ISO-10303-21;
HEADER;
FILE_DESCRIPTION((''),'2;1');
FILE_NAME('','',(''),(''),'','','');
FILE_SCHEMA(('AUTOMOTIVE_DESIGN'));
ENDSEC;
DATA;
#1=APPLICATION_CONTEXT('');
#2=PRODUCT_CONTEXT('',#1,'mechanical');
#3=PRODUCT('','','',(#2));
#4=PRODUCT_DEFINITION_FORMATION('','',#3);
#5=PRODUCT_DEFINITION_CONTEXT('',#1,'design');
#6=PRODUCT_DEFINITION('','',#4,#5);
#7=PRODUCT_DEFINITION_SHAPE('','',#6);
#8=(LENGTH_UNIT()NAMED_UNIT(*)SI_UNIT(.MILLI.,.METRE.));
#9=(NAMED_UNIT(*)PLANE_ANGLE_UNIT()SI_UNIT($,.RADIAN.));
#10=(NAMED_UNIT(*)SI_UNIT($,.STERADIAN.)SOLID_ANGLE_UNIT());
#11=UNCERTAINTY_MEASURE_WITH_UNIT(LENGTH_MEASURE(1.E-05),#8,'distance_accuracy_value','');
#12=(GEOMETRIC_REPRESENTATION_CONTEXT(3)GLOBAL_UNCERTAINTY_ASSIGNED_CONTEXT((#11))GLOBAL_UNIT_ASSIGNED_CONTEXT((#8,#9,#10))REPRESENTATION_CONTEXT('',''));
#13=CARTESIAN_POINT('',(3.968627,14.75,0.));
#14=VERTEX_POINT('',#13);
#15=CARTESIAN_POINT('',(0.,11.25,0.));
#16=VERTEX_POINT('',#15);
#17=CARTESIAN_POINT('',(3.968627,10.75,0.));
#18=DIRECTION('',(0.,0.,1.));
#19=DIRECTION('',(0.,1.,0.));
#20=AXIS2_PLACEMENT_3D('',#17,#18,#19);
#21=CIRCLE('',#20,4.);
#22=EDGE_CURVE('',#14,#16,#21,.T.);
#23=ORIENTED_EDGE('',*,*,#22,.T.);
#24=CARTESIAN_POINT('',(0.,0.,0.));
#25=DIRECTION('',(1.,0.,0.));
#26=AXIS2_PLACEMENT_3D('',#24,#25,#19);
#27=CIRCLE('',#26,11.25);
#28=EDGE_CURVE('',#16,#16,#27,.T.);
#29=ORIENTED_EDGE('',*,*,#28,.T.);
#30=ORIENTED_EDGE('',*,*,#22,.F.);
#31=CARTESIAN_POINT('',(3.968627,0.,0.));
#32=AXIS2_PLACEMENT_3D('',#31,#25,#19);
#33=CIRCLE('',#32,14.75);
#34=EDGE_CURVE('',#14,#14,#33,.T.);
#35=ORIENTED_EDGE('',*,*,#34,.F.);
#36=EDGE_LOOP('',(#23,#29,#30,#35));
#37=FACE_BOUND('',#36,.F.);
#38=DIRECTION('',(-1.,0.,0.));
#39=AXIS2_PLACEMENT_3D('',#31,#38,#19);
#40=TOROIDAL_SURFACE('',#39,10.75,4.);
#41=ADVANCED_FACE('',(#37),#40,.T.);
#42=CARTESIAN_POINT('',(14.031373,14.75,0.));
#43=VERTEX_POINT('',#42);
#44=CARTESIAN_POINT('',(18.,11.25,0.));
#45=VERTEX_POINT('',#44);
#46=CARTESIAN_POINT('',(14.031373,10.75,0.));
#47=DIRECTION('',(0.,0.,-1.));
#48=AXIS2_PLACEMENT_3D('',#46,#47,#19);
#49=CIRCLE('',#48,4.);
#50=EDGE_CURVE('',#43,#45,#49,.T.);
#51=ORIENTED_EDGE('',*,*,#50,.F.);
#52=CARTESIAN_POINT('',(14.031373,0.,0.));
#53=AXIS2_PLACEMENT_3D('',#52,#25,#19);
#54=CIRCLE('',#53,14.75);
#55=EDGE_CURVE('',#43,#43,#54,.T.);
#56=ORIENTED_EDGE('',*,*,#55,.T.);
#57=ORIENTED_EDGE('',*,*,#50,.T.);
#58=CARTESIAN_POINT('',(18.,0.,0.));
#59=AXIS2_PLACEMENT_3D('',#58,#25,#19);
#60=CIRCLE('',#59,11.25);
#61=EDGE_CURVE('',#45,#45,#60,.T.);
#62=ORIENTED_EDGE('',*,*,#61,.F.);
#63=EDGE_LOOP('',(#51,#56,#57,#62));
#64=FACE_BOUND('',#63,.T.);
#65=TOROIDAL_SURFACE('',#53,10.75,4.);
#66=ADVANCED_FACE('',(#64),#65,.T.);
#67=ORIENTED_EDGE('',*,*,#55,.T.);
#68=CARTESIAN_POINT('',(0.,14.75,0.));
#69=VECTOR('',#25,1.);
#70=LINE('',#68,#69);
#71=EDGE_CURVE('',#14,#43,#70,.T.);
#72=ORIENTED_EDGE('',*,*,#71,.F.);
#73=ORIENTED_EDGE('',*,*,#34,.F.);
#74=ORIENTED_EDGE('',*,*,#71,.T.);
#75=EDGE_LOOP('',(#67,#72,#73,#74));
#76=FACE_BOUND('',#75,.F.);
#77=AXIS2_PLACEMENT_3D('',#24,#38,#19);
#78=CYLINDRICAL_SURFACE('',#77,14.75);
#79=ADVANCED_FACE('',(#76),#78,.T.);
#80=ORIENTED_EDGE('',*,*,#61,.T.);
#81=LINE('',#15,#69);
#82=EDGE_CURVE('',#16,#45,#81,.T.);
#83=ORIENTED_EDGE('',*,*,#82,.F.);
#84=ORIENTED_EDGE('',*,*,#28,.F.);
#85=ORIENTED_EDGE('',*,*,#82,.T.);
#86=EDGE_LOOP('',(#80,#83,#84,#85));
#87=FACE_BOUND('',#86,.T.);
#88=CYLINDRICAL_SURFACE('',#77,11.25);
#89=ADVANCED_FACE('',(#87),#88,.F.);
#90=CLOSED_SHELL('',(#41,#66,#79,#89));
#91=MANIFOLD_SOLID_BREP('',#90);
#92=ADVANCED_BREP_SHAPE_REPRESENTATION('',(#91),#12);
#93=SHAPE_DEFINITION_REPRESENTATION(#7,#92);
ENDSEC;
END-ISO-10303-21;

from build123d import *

# Parameters (mm, degrees)
F0_R     = 14.75
F0_R_2   = 11.25
F1_DEPTH = 18


# Not quite as in the source:
# - a fillet or chamfer that OpenCascade refuses, or shapes differently, is made with other operations: its cross-section is extruded or revolved along the edge and cut away or added


with BuildPart() as f1:
    # F0 (on Right) → F1 (new body)
    with BuildSketch(Plane.YZ):
        Circle(F0_R)
        Circle(F0_R_2, mode=Mode.SUBTRACT)
    extrude(amount=F1_DEPTH)

    # F2: fillet of radius 4 on 2 edges, made by hand

    # F2_s1 → F2_t2 (revolve, cut)
    with BuildSketch(Plane.XY):
        with BuildLine():
            ThreePointArc((14.0313730334, 14.75), (16.6771243445, 13.75), (18, 11.25))
            Line((18, 11.25), (18, 14.75))
            Line((18, 14.75), (14.0313730334, 14.75))
        make_face()
    revolve(axis=Axis((18, 0, 0), (1, 0, 0)), mode=Mode.SUBTRACT)

    # F2_s3 → F2_t4 (revolve, cut)
    with BuildSketch(Plane.XY):
        with BuildLine():
            ThreePointArc((3.9686269666, 14.75), (1.3228756555, 13.75), (0, 11.25))
            Line((0, 11.25), (0, 14.75))
            Line((0, 14.75), (3.9686269666, 14.75))
        make_face()
    revolve(axis=Axis((0, 0, 0), (1, 0, 0)), mode=Mode.SUBTRACT)


solid = f1.part
